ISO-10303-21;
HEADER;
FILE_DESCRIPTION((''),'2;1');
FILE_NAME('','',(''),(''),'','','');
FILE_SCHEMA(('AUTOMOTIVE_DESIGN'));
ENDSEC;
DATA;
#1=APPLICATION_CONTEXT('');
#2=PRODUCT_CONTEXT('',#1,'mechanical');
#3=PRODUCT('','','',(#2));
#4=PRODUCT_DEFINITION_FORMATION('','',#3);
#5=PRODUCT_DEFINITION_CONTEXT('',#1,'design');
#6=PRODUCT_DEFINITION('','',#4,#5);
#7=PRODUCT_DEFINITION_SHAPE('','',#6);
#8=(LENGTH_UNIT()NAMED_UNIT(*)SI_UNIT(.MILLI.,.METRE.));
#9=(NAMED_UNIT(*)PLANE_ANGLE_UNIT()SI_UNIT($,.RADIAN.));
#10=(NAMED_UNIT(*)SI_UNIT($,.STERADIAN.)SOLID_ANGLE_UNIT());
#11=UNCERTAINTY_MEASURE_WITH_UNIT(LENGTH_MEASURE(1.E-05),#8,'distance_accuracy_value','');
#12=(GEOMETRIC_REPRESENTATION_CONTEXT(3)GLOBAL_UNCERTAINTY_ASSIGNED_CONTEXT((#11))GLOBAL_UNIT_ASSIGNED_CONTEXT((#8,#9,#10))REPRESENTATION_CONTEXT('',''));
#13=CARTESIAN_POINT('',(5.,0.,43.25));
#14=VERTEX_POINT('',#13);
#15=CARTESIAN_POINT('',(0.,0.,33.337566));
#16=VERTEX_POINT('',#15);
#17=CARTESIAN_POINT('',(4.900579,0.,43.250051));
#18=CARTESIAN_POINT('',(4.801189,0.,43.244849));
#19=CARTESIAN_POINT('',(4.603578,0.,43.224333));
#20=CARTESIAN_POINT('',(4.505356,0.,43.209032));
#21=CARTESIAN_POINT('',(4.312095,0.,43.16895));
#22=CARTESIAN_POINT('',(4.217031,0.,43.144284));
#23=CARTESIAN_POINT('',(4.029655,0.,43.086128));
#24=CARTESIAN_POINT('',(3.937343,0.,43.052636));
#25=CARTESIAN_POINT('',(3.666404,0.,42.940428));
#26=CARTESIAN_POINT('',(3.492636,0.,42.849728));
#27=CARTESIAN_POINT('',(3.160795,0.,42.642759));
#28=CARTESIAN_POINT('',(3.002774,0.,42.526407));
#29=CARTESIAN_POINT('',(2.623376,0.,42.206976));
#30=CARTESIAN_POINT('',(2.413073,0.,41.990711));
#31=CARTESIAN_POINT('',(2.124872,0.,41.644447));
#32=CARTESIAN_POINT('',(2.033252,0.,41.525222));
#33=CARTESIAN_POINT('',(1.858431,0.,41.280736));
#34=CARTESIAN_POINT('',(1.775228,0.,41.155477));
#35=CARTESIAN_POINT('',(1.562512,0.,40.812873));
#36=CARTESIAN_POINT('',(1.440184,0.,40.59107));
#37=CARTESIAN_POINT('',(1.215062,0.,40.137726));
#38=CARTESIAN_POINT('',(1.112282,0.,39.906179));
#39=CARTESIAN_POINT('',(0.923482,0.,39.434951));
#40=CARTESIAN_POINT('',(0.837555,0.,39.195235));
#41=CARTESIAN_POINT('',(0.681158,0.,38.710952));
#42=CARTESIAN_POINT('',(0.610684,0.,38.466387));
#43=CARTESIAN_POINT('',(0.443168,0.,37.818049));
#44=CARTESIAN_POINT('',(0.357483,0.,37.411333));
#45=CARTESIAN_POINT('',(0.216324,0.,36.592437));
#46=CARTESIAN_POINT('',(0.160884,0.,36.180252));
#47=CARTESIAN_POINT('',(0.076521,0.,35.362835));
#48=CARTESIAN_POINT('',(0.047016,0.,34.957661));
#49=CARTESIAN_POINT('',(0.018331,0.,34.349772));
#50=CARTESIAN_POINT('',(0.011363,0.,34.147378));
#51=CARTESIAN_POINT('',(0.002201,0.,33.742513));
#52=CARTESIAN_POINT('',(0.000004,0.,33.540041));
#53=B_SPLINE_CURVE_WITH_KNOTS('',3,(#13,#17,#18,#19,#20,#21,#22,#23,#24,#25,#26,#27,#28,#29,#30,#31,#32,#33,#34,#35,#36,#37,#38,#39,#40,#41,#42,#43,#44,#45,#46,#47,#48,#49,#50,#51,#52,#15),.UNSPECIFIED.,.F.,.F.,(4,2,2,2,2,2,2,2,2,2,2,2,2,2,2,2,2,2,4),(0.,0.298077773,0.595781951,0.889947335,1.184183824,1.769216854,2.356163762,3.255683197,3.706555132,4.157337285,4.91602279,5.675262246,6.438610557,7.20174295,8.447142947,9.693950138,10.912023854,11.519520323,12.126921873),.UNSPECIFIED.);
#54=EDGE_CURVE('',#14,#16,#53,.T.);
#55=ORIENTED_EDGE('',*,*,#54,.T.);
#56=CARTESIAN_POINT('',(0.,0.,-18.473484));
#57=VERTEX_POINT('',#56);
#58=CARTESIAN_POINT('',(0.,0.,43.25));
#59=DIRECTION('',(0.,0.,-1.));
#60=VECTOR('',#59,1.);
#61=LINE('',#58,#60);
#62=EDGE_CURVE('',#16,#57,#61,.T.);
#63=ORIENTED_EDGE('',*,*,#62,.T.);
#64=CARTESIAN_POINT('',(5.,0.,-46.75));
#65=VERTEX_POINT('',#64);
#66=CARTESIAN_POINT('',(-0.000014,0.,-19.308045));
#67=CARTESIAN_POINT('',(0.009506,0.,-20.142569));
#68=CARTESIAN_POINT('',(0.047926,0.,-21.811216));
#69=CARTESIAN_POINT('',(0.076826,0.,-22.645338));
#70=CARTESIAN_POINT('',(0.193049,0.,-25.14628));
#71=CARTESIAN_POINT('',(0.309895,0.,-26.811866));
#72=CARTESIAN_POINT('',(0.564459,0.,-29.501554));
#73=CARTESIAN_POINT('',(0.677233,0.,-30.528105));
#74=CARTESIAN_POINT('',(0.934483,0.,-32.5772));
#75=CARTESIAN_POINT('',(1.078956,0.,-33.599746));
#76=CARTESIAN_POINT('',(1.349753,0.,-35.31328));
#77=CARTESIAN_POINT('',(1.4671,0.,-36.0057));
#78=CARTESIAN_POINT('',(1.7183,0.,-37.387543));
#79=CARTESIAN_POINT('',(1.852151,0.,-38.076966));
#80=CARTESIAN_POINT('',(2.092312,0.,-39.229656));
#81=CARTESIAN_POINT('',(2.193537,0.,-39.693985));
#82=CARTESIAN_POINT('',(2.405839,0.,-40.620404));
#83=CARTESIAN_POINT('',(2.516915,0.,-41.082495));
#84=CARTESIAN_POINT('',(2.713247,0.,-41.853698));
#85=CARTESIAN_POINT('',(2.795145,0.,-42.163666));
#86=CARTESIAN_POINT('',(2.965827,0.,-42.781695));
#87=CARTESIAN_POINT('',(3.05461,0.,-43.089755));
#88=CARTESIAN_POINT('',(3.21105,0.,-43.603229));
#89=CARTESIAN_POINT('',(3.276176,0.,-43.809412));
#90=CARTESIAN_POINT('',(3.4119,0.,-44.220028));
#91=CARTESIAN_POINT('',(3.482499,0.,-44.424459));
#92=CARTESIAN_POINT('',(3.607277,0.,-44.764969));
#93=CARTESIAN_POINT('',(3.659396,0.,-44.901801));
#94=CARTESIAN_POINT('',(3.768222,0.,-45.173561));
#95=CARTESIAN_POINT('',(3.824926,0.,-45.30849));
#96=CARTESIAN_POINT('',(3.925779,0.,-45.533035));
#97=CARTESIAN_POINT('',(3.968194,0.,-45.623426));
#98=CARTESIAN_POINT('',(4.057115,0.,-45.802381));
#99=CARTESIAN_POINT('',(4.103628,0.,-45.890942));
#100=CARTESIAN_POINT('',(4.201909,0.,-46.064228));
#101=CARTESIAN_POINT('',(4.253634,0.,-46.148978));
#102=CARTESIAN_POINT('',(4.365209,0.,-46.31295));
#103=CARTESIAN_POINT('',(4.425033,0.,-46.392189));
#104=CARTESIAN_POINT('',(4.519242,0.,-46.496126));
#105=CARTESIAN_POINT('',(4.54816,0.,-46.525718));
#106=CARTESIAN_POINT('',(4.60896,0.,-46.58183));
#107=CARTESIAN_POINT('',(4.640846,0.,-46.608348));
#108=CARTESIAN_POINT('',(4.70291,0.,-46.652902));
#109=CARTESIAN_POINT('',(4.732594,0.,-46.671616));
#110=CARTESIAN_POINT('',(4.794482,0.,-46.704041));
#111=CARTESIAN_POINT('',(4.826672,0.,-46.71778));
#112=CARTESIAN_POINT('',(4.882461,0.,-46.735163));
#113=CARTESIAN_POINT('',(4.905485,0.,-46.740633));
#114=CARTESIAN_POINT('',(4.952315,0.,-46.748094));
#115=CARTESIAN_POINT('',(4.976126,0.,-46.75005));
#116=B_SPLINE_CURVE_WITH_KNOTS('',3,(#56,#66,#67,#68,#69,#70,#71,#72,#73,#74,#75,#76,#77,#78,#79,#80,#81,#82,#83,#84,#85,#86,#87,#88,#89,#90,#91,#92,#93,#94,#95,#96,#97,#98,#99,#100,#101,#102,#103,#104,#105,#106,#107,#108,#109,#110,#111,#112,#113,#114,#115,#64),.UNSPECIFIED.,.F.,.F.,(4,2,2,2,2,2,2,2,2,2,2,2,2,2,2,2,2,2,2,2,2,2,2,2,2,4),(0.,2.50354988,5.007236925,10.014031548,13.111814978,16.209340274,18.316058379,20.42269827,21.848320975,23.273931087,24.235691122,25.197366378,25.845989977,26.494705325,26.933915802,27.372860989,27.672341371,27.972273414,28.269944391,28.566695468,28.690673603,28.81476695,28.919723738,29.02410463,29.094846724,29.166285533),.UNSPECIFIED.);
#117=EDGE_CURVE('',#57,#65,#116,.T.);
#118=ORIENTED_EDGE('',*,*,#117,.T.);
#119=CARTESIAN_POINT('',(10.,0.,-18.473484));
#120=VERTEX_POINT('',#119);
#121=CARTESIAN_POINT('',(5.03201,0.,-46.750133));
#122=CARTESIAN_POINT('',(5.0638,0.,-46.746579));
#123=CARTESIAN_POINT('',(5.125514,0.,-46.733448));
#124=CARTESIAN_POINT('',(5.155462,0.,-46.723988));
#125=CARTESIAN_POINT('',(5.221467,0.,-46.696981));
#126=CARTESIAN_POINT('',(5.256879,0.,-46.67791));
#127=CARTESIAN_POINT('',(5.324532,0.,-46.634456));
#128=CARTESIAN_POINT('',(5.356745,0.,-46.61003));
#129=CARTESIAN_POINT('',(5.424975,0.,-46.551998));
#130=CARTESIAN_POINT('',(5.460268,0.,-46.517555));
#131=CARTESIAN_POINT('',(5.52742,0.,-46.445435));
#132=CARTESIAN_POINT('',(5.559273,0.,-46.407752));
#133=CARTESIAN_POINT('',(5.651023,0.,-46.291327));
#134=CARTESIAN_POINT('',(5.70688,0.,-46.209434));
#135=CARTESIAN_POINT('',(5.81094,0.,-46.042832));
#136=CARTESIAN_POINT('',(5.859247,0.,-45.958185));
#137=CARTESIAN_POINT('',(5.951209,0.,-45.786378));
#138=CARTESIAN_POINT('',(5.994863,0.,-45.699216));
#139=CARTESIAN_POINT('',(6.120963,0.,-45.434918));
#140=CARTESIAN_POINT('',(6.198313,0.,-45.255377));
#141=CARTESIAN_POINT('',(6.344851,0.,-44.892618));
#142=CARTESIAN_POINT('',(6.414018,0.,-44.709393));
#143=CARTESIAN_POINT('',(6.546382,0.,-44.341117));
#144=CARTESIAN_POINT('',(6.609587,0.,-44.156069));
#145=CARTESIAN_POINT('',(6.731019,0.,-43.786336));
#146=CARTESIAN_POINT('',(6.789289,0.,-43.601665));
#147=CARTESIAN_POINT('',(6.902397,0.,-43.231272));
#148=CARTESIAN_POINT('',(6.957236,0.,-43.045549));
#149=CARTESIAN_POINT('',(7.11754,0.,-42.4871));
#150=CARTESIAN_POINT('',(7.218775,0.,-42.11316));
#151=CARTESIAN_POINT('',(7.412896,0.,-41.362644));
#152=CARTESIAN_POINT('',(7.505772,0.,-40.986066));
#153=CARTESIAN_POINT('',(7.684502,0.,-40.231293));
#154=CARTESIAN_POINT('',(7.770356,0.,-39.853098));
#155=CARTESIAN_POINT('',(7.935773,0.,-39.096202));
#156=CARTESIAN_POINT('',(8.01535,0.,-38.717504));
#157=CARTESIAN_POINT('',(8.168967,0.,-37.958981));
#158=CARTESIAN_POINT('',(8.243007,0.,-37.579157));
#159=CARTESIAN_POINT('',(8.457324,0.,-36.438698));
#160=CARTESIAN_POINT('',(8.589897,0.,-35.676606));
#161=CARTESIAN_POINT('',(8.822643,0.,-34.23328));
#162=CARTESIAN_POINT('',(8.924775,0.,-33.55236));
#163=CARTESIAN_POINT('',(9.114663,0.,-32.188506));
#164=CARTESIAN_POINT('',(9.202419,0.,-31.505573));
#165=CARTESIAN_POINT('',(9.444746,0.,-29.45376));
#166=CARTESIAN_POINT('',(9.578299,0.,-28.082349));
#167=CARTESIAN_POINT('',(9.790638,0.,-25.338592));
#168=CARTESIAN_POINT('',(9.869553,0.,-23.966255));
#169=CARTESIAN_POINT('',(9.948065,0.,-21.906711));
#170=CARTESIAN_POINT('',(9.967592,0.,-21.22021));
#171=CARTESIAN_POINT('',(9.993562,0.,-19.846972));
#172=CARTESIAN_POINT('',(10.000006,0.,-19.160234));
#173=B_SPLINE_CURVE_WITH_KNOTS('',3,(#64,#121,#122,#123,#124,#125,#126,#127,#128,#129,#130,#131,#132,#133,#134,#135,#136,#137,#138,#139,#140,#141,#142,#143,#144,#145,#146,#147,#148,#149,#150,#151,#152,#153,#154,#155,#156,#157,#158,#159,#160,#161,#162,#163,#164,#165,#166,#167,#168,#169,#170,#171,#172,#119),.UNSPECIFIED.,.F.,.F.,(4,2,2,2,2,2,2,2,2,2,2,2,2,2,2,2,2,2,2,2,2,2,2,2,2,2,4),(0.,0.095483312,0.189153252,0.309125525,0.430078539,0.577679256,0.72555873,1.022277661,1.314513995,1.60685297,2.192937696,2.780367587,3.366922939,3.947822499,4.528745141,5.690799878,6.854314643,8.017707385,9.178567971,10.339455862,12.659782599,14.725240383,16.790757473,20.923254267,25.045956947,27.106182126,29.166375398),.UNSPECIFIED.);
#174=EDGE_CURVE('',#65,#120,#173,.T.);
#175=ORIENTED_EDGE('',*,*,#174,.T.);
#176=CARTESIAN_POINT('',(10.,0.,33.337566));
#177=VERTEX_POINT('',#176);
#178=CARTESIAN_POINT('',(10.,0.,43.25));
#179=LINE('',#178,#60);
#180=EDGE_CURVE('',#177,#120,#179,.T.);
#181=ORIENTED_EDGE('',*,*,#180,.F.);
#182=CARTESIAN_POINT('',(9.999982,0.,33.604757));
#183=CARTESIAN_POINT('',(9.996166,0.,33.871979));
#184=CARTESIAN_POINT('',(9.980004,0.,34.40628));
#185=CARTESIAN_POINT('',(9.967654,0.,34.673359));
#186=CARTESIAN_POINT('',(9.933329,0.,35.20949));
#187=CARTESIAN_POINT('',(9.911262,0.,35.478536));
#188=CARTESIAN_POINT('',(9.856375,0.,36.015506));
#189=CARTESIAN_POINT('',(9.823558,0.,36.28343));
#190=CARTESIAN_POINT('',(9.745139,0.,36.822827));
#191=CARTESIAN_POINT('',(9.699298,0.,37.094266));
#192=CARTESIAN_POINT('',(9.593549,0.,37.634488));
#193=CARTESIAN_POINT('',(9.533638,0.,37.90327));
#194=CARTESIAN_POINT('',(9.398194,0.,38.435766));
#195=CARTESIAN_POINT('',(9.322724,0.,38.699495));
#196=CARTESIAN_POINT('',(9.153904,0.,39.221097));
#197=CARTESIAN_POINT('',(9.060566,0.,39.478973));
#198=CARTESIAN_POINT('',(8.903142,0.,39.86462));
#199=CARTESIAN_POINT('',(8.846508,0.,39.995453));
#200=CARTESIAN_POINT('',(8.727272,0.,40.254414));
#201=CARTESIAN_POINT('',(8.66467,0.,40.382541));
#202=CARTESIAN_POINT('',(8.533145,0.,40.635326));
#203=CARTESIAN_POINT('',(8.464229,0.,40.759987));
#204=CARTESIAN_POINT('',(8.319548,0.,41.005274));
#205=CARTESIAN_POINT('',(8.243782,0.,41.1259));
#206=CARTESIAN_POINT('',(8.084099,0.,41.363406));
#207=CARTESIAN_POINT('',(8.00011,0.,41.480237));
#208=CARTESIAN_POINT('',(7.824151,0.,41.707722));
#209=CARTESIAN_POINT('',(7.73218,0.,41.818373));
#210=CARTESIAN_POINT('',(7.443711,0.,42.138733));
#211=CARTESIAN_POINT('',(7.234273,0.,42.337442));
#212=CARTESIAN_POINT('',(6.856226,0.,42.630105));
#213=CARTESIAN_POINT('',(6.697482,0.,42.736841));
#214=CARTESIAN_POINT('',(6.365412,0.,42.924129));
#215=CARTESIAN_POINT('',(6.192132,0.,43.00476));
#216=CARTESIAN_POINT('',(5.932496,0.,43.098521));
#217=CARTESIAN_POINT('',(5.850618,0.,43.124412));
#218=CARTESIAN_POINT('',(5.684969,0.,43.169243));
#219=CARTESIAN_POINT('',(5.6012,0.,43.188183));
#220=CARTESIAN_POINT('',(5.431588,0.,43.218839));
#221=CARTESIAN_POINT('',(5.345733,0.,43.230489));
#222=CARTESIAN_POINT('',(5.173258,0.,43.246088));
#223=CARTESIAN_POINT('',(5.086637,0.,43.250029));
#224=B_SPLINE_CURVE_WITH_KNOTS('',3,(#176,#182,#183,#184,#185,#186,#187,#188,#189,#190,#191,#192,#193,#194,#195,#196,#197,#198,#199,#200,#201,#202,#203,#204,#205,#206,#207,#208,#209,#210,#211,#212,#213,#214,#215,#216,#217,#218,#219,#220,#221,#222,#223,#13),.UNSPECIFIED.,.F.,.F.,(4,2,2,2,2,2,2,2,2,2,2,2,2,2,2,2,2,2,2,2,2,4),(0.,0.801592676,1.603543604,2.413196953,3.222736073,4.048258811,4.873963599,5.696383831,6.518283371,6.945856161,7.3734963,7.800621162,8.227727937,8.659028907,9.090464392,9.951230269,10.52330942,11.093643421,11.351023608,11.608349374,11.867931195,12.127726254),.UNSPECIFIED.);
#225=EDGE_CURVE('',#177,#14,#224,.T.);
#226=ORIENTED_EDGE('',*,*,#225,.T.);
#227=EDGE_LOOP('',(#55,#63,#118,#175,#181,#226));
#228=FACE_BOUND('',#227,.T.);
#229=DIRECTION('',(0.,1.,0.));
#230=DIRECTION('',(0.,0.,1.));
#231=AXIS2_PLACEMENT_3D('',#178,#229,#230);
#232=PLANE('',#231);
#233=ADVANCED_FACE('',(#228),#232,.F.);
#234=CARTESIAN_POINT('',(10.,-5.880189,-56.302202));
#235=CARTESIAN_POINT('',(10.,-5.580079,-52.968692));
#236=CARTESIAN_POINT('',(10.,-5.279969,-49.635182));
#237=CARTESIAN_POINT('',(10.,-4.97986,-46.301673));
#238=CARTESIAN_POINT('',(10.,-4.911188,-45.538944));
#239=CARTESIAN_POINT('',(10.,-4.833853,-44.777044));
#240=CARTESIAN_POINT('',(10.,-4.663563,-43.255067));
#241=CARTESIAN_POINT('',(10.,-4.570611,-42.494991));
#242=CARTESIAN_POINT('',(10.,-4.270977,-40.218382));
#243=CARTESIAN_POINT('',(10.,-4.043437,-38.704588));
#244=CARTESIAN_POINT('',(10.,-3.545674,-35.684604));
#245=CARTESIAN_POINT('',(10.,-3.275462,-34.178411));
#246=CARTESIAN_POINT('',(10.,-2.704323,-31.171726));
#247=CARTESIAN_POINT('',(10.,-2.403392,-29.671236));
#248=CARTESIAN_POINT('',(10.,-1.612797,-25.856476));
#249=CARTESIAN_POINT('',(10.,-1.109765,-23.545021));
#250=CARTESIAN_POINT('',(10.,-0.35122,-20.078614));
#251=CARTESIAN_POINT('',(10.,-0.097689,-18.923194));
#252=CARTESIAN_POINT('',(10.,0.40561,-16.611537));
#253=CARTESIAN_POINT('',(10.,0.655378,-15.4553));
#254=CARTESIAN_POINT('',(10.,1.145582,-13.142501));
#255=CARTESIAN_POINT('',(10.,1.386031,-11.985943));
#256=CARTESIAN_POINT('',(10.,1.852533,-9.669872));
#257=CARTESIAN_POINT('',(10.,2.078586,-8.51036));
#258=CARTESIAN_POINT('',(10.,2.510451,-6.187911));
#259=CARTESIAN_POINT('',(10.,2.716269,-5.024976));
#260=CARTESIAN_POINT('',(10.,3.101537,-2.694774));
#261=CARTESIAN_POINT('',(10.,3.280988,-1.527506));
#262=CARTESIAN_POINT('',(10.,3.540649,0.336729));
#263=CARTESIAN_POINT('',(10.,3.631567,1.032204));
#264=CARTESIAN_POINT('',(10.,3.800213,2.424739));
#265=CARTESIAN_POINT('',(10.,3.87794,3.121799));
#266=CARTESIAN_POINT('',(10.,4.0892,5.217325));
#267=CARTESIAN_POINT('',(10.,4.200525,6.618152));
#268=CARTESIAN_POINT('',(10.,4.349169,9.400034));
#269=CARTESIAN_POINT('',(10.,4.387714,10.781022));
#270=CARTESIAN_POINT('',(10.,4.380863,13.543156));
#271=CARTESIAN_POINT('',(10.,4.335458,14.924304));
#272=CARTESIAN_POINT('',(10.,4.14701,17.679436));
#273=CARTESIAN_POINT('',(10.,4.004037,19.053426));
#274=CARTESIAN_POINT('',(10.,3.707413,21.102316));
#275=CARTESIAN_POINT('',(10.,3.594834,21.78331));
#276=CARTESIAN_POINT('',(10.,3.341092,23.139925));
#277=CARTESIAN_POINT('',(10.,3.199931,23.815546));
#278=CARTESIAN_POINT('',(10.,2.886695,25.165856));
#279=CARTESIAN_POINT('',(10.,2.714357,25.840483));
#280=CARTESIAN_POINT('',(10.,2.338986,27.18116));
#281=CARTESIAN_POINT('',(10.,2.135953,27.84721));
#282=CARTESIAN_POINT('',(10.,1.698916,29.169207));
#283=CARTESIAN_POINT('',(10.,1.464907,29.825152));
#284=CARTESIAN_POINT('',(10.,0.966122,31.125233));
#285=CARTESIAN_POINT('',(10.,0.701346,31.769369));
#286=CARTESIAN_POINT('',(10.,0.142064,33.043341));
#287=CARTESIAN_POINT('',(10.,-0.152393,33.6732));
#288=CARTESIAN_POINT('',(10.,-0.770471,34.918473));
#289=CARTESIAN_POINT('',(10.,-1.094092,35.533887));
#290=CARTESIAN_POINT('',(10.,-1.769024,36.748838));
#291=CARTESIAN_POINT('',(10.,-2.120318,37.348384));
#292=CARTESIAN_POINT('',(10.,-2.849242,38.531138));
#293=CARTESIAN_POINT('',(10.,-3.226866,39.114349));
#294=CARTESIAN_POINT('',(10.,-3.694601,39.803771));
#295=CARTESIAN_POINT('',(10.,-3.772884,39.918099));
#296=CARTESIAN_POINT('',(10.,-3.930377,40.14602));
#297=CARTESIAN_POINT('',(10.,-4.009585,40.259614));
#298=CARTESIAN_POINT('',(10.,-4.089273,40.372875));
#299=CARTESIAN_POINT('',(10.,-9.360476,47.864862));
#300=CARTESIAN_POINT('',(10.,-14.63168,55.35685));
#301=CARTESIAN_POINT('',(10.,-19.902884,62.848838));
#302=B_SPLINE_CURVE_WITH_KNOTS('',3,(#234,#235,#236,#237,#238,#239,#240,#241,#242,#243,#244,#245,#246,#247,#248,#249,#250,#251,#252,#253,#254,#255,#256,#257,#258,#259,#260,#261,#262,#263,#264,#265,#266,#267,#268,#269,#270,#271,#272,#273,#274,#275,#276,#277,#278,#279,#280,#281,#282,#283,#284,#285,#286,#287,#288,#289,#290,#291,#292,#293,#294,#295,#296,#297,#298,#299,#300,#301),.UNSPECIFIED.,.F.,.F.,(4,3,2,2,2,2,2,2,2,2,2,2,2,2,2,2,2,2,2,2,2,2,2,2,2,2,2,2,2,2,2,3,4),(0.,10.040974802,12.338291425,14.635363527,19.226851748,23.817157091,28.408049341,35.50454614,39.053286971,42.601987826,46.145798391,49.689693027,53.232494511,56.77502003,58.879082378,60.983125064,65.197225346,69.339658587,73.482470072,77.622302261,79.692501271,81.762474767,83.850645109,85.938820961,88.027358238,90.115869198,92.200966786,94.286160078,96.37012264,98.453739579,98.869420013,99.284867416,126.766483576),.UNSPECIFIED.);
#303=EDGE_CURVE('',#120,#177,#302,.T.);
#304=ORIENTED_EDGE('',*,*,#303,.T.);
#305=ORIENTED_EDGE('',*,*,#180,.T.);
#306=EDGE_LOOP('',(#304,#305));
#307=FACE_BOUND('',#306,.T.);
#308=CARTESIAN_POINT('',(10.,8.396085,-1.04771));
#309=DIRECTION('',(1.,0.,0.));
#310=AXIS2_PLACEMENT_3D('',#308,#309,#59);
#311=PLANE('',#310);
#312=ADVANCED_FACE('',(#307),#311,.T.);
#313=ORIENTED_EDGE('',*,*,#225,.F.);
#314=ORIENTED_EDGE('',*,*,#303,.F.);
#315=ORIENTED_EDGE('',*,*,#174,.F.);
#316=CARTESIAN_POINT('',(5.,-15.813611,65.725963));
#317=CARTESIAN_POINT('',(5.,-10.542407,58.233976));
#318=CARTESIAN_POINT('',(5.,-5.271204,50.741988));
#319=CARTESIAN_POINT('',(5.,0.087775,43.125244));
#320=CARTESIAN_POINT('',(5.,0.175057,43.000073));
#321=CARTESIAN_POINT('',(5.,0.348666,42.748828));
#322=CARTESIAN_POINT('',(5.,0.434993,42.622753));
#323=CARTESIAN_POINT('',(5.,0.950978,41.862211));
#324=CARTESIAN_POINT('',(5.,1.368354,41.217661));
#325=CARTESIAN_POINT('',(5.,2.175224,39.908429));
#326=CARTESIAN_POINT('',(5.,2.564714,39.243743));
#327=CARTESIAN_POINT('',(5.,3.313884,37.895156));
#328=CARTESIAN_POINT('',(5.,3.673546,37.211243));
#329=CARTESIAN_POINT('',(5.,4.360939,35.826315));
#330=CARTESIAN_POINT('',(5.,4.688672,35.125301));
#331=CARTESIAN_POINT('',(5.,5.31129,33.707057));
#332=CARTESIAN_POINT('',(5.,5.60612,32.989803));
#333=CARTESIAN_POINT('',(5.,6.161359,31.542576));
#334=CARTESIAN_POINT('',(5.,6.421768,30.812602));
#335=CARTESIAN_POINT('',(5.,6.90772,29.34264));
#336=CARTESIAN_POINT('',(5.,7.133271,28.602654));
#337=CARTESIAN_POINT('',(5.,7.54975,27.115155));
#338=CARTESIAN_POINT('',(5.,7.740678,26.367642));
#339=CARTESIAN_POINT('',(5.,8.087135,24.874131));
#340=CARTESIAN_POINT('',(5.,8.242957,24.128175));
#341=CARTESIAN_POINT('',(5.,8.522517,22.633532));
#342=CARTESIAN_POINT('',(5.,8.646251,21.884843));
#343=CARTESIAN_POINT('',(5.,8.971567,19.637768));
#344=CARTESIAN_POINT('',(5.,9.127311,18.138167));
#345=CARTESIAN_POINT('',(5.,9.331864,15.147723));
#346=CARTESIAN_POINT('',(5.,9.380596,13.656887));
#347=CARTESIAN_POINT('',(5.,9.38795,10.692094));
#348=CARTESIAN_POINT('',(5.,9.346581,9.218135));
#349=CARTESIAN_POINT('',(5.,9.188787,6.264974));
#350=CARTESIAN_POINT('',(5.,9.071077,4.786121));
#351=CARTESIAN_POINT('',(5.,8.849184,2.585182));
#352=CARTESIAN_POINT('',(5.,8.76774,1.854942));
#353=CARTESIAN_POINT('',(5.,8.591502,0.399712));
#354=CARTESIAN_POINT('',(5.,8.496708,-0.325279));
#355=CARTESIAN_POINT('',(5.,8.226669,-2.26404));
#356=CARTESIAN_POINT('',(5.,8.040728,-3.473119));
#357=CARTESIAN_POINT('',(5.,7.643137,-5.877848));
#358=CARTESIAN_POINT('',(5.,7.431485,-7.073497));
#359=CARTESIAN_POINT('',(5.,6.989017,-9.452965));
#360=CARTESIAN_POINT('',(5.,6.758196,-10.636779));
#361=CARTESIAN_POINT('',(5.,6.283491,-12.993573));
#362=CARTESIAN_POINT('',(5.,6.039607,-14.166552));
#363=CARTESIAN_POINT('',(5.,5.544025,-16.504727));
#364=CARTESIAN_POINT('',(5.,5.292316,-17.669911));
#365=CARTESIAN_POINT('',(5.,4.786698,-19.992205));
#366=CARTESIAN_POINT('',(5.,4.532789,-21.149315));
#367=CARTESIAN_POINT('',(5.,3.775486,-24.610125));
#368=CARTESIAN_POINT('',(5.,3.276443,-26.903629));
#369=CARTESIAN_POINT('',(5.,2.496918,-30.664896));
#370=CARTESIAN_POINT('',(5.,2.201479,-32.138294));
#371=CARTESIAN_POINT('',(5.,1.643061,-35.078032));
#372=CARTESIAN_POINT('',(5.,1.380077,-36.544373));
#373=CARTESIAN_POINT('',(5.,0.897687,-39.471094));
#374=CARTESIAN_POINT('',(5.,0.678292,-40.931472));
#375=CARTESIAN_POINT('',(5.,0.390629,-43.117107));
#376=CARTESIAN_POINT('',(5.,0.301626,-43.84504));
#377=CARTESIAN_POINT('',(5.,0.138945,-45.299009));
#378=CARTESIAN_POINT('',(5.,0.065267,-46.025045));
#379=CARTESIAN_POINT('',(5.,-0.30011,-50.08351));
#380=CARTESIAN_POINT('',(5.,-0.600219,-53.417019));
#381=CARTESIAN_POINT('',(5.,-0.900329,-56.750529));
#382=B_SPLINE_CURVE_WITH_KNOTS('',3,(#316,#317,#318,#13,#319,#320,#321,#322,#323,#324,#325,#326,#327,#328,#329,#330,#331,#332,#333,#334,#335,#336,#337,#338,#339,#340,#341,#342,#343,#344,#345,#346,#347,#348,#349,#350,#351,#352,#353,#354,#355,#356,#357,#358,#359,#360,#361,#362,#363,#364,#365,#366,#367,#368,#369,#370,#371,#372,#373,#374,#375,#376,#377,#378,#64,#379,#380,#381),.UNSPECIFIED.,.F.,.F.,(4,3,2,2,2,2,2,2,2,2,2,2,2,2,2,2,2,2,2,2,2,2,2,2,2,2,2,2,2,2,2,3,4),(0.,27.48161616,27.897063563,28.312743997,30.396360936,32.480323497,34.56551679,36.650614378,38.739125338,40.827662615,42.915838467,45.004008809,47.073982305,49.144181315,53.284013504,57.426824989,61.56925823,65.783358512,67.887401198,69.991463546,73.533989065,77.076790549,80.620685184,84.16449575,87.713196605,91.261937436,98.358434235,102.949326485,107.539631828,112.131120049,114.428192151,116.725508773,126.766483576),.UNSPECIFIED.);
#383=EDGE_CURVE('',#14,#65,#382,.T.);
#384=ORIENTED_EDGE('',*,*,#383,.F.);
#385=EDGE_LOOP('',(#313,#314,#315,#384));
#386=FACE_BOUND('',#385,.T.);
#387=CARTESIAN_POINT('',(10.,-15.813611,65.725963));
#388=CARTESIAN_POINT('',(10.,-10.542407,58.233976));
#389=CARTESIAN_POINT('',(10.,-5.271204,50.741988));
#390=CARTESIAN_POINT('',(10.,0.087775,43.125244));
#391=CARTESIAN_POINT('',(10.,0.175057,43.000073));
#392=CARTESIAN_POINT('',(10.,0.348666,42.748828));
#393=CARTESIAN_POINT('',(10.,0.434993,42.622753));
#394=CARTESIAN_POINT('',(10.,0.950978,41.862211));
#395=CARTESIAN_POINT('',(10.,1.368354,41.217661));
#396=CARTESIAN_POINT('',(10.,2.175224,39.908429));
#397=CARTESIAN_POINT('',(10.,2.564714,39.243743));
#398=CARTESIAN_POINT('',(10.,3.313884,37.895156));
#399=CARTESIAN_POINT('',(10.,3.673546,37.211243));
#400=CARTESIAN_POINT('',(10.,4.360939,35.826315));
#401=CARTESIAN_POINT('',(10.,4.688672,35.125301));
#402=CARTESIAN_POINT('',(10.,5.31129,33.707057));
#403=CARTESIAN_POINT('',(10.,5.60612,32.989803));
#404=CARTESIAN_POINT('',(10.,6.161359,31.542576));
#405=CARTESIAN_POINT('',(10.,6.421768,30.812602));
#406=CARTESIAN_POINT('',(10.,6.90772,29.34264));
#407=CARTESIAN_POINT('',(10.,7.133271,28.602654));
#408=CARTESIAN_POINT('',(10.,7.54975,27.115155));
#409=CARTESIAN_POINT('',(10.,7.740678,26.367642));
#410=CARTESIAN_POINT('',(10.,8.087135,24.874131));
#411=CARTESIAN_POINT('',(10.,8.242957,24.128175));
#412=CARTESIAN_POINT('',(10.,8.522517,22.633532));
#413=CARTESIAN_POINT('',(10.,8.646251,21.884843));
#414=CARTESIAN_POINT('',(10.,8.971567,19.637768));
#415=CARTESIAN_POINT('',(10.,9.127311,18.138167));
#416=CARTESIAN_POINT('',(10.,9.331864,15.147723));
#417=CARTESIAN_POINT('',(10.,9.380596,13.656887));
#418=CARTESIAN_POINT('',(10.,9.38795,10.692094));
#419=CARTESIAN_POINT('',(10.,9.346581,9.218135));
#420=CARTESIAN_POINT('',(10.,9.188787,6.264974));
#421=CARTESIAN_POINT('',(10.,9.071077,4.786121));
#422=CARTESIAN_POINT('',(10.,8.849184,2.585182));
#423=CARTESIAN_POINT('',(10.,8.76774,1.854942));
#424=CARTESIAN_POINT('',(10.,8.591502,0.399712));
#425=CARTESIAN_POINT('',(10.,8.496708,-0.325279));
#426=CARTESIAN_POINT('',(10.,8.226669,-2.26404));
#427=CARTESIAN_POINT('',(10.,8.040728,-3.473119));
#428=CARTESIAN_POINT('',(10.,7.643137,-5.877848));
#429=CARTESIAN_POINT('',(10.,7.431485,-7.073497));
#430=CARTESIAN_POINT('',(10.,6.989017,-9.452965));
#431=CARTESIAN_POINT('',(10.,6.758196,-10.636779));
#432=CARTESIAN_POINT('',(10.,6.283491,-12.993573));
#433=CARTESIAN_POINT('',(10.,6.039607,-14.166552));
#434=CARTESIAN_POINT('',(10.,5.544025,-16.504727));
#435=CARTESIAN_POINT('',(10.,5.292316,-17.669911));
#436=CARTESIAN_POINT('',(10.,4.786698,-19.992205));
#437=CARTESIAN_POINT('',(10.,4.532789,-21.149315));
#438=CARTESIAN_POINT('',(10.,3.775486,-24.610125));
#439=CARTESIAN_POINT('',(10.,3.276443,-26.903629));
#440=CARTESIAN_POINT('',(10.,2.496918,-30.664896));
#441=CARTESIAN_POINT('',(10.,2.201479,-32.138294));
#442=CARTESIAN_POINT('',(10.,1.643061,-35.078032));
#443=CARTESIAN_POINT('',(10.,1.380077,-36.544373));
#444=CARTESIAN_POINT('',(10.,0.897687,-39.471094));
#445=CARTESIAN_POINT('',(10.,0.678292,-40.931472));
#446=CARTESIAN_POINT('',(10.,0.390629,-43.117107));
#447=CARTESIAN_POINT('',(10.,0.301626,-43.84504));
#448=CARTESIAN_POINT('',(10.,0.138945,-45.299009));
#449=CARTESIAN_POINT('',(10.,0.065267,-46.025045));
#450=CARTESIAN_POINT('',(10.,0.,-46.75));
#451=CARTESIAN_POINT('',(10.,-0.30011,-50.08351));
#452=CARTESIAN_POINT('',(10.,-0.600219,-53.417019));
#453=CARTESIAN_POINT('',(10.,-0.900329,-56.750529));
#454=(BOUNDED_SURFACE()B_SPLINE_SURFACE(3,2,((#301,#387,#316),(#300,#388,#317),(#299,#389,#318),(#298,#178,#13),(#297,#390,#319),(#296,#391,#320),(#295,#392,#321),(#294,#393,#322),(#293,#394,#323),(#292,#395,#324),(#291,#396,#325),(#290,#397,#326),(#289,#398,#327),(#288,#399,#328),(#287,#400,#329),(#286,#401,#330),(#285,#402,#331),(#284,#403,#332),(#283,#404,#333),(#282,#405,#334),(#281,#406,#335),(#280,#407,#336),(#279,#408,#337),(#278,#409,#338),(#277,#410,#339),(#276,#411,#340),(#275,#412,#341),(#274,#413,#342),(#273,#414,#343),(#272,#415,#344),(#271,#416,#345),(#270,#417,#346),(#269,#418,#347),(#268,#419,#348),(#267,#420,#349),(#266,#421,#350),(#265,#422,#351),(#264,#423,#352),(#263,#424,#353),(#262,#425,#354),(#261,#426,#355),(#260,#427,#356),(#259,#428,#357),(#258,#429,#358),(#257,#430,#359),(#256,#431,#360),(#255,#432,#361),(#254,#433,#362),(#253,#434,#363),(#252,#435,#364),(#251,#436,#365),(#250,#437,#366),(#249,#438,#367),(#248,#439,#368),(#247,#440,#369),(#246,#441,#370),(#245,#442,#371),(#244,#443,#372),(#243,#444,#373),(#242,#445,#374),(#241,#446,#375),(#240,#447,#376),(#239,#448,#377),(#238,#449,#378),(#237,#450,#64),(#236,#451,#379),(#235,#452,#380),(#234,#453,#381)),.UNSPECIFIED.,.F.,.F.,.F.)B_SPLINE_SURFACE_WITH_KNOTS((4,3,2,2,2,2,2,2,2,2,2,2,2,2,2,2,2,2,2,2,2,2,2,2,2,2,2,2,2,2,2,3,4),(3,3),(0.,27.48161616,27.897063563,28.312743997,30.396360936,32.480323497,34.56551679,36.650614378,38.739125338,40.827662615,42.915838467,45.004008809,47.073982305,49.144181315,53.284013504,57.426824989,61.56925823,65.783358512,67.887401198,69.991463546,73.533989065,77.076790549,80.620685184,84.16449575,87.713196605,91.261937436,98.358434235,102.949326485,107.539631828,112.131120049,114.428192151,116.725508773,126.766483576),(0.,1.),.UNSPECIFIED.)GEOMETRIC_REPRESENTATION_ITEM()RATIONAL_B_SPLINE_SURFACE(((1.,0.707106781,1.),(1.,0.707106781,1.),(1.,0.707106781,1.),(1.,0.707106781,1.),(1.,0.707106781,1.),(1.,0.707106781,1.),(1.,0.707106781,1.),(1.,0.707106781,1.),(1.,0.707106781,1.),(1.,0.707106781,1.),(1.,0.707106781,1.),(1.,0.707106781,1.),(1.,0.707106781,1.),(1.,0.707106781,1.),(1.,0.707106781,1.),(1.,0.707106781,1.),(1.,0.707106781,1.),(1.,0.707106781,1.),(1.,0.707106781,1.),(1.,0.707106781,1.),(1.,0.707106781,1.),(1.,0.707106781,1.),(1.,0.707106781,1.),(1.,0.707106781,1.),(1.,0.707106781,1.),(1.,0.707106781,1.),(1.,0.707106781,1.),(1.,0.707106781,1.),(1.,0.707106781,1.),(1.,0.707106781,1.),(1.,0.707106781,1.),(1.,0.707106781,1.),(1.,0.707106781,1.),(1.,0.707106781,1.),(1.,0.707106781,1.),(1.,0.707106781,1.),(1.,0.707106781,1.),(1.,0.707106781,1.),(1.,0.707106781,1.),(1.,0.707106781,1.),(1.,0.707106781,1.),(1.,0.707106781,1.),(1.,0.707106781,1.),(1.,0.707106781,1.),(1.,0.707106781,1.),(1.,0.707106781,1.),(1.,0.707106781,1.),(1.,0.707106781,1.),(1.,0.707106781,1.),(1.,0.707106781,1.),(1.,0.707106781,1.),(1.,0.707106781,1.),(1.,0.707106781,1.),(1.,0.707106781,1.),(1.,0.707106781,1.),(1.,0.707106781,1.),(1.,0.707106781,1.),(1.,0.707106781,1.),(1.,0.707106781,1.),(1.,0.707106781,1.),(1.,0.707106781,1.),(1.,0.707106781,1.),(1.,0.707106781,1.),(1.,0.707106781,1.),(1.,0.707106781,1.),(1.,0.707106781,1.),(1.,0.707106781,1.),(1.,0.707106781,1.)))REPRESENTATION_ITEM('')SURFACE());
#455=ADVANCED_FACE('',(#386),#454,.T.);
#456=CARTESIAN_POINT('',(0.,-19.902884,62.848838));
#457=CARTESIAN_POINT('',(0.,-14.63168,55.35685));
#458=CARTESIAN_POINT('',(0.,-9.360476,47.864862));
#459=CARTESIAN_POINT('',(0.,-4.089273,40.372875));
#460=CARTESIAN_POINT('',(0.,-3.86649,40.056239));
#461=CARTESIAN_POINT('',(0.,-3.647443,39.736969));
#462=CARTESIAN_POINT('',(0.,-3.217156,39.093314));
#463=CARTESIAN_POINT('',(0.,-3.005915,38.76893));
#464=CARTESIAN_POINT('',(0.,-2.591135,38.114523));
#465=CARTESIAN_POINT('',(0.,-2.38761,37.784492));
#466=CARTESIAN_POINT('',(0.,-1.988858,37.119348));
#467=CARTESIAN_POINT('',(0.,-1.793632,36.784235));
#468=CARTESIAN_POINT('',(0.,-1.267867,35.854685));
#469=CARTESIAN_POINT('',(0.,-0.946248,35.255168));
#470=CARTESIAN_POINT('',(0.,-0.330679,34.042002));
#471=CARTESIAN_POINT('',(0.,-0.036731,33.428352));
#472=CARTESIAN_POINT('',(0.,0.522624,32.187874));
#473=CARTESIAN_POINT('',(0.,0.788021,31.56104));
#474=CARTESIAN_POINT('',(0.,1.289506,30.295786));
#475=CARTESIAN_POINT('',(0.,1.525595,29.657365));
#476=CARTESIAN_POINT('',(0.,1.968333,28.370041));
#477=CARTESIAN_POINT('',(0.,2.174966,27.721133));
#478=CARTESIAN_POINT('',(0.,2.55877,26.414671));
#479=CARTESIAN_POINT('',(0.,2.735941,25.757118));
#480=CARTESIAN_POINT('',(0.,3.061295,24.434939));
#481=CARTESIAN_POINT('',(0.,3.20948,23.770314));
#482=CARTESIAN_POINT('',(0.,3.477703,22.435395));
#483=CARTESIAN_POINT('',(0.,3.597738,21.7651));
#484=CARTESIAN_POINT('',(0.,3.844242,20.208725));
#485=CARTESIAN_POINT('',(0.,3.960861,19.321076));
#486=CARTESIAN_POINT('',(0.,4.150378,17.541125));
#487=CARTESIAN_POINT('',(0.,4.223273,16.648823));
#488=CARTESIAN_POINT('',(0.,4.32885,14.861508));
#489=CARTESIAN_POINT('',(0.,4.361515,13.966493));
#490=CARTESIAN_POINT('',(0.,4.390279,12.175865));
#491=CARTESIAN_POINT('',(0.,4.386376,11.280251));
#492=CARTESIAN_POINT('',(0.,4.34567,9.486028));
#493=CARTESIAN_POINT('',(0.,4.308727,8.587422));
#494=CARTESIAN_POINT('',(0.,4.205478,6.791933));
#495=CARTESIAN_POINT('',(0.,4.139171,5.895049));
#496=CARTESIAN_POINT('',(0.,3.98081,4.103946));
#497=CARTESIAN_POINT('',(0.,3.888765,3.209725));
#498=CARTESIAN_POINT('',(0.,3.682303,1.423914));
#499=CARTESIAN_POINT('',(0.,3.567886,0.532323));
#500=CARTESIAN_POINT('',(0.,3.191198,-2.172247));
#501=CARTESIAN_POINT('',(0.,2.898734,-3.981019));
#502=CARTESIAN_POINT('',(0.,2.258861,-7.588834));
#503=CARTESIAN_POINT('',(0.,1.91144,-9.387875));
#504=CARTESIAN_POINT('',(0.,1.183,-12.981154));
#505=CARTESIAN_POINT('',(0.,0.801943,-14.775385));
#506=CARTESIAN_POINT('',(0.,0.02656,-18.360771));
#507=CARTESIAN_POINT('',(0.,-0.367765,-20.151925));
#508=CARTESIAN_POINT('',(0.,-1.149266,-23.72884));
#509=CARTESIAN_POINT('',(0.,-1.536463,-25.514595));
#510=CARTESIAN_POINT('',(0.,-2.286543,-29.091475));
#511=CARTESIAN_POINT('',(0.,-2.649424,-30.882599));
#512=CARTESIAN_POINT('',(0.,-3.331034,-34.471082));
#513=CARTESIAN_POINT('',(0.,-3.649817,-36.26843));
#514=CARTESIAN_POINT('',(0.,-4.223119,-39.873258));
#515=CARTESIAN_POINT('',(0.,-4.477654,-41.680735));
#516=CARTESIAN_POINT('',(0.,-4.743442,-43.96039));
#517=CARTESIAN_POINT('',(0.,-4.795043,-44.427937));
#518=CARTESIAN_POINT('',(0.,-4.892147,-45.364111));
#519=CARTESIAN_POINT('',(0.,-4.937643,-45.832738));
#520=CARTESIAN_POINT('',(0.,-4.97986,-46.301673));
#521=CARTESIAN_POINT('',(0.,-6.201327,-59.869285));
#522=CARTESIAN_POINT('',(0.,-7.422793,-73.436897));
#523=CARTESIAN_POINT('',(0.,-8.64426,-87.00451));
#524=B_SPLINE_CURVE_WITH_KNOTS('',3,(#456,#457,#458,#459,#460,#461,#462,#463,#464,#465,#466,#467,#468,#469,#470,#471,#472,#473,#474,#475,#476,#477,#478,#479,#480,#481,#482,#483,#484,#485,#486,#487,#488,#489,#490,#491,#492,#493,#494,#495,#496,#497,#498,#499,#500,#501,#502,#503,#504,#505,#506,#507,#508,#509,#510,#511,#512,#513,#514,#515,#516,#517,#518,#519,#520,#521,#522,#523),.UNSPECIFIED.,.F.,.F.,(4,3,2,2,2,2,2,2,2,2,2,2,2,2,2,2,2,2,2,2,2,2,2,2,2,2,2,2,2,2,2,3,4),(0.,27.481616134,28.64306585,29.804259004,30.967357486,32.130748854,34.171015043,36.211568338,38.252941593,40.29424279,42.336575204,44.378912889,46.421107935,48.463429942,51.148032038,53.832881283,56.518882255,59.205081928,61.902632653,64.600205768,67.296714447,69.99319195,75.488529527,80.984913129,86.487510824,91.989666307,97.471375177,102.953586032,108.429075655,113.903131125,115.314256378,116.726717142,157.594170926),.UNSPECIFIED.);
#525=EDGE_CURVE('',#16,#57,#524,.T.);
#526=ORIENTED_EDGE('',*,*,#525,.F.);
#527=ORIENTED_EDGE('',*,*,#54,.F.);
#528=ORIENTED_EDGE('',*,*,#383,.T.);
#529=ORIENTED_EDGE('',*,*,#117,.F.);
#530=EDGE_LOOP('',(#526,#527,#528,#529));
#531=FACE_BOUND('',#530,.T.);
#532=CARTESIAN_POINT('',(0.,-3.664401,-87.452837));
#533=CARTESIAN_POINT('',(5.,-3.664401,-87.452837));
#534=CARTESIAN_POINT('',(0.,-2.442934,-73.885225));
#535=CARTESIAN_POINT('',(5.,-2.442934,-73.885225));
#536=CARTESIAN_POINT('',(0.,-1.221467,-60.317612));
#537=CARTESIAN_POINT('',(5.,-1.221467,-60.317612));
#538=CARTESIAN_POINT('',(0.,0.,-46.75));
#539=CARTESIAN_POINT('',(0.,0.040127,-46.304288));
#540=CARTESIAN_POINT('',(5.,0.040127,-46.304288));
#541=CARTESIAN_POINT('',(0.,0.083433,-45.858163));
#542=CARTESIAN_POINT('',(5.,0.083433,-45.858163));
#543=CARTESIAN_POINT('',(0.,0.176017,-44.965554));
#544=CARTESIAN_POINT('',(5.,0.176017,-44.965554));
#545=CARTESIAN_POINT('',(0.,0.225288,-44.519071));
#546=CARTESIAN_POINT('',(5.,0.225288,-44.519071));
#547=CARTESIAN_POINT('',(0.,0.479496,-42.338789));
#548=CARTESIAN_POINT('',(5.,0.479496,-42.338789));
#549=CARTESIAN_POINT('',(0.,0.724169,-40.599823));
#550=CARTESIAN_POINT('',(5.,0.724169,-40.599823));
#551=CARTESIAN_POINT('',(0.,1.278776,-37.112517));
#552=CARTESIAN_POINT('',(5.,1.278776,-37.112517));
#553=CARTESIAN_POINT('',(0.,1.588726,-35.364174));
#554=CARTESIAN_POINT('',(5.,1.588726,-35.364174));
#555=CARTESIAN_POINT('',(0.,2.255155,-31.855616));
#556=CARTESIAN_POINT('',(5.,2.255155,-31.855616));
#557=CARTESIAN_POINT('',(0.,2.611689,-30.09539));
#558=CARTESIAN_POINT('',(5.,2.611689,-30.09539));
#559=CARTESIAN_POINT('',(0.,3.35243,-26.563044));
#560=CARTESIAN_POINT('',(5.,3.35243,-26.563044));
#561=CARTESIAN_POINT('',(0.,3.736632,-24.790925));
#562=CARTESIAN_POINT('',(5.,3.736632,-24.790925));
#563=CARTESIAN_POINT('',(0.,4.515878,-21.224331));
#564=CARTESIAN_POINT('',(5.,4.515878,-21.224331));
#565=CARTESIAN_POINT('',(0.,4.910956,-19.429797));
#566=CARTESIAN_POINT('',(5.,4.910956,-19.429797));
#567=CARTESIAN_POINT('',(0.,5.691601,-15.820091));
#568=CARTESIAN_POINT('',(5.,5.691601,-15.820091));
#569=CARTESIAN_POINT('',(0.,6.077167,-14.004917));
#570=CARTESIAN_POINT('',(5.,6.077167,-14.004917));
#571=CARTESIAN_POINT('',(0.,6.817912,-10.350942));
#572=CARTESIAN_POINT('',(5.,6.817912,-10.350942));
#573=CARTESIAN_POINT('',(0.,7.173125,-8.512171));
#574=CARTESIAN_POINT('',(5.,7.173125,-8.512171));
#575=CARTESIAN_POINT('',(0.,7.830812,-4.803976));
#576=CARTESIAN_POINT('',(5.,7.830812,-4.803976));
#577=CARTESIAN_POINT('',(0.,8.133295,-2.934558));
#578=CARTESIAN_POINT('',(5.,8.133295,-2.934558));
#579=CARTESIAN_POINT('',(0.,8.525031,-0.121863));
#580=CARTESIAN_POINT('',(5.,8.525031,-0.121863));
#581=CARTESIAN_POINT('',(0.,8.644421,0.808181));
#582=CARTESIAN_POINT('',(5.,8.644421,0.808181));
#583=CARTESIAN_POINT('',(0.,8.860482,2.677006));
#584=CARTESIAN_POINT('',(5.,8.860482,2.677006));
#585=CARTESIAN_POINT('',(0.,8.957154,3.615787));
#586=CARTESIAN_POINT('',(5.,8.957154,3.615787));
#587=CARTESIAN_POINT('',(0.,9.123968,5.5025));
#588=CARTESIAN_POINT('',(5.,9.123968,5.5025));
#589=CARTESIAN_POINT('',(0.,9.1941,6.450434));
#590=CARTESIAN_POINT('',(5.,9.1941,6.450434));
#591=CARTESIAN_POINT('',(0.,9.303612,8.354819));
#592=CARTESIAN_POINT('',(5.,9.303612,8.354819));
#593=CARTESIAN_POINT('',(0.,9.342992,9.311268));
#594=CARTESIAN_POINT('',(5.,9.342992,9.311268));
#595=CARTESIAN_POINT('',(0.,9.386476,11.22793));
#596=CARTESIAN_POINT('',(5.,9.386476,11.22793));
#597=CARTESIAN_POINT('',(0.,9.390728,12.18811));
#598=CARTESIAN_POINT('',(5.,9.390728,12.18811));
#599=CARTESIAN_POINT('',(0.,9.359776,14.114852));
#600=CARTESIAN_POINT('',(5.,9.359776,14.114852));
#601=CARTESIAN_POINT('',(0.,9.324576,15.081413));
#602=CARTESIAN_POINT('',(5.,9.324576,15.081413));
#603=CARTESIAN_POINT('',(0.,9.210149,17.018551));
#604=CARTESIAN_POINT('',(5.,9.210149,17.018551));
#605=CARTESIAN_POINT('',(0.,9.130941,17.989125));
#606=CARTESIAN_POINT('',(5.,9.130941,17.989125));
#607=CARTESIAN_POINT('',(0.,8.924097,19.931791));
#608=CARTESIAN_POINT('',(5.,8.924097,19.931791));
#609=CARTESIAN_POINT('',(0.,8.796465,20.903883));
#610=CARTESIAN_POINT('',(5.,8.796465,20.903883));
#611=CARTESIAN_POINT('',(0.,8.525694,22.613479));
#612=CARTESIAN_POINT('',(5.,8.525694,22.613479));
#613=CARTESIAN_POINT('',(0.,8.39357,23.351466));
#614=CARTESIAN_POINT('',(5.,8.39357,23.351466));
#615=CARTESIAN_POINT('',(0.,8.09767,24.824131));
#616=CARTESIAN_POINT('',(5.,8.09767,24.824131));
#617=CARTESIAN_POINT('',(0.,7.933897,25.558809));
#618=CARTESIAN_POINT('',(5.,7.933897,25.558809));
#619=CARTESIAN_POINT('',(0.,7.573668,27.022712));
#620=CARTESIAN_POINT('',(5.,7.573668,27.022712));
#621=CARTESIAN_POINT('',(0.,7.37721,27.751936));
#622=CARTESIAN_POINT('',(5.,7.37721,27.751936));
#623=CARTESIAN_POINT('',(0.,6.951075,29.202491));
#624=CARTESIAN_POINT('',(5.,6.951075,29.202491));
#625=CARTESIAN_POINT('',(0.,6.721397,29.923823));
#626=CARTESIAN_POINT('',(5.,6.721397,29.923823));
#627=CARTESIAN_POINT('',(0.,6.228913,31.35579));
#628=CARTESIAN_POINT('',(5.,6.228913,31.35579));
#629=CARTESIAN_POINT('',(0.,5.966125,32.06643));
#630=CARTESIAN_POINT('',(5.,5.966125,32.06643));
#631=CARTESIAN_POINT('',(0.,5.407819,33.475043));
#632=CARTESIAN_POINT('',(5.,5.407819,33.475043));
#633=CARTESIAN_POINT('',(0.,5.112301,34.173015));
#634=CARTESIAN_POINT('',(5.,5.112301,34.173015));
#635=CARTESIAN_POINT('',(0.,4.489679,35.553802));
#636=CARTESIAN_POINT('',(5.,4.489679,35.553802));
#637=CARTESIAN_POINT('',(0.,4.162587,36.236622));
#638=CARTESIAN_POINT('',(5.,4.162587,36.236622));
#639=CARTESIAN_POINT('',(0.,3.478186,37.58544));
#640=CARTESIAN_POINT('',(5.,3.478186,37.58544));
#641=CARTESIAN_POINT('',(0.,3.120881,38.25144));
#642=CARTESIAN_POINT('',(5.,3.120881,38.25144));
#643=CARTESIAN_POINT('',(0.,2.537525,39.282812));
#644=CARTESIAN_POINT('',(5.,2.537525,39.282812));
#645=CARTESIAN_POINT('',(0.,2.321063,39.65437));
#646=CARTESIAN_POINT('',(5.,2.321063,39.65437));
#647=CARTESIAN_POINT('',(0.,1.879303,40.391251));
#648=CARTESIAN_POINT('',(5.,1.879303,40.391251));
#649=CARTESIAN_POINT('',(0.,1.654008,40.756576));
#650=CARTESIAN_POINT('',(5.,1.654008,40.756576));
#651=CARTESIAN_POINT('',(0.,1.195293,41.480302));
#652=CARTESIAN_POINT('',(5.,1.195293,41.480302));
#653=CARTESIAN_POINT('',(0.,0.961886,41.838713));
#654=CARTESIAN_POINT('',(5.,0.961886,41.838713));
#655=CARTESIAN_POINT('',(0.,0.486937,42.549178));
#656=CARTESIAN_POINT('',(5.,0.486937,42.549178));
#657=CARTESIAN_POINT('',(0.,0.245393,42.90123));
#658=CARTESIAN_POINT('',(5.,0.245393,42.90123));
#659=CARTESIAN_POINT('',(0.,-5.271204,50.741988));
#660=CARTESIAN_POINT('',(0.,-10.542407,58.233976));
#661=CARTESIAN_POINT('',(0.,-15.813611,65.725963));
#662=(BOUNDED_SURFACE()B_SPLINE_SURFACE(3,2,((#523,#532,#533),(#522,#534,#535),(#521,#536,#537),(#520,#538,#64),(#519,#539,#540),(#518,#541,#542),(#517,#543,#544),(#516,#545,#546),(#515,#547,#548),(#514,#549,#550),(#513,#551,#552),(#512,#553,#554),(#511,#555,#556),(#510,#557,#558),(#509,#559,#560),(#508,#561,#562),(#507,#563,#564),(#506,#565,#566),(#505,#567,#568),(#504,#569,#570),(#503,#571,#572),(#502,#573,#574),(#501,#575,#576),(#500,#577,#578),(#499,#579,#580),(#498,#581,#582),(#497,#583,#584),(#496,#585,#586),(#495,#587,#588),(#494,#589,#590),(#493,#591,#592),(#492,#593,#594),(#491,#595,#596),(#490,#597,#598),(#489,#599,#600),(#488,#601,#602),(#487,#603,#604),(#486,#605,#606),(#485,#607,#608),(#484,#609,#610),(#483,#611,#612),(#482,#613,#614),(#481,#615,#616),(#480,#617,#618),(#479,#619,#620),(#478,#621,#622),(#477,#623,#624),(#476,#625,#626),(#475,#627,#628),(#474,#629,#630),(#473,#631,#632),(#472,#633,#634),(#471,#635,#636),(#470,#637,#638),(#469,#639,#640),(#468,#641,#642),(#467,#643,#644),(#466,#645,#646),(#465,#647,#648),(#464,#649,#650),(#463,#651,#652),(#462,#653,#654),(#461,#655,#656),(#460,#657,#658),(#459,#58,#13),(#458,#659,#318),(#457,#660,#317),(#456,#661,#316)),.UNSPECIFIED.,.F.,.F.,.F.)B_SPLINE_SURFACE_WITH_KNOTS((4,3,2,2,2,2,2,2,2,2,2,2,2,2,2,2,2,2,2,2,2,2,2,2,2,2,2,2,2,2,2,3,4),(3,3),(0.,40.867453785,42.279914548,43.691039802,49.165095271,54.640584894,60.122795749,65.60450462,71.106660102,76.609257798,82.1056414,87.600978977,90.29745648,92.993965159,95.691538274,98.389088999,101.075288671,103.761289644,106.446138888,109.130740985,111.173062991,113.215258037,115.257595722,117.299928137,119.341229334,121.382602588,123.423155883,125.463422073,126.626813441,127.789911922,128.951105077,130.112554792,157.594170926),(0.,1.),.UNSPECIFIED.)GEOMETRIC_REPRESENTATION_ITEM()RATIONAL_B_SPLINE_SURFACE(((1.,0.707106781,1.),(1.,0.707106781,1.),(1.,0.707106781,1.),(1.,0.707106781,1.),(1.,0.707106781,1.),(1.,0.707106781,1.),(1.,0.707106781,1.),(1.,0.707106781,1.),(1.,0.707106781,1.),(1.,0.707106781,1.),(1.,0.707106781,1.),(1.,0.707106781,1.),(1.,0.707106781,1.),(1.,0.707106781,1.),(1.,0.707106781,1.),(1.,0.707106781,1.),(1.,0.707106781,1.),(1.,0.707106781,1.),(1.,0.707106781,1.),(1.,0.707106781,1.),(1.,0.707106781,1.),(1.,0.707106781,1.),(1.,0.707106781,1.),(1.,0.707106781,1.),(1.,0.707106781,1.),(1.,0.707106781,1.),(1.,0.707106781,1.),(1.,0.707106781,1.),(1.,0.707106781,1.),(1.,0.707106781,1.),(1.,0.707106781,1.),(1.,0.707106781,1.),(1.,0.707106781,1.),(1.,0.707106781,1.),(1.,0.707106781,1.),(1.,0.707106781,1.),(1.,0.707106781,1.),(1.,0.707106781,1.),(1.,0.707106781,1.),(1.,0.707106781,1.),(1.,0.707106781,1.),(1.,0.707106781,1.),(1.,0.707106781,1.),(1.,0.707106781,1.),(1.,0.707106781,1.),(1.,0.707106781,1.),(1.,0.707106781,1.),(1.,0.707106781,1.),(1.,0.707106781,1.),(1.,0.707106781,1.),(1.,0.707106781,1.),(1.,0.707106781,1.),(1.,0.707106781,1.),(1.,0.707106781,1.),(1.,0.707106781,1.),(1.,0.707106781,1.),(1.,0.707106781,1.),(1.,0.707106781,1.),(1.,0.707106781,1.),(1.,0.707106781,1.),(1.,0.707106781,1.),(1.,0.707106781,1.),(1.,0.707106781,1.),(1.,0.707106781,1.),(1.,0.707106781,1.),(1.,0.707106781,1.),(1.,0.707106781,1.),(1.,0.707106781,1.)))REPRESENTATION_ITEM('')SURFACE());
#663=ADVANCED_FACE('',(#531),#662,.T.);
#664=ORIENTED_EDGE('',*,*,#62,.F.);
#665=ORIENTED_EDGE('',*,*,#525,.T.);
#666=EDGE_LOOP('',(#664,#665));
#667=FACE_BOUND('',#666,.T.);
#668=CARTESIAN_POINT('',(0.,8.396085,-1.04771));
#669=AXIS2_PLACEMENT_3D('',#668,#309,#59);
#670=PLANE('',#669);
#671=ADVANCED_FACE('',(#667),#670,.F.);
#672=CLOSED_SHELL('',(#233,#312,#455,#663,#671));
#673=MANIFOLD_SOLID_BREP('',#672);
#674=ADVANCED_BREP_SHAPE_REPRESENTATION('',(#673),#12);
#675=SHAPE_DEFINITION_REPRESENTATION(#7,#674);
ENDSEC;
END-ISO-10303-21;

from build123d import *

# Parameters (mm, degrees)
BOSS_EXTRUDE1_DEPTH = 10
FILLET1_R           = 5


with BuildPart() as part:
    # Sketch1 → Boss-Extrude1 (new body)
    with BuildSketch(Plane(origin=(0, 0, 0), x_dir=(0, 0, -1), z_dir=(1, 0, 0))):
        with BuildLine():
            Line((-43.25, 0), (46.75, 0))
            add(Edge.make_bspline(
                [(-43.25, 0), (-15.250046728, 19.700173134), (16.877274504, 2.689385841), (46.75, 0)],
                knots=[0, 0, 0, 0, 1, 1, 1, 1], degree=3))
        make_face()
    extrude(amount=BOSS_EXTRUDE1_DEPTH)

    # Fillet1
    fillet1_edges = [part.edges().sort_by_distance(p)[0] for p in [
        (0, 8.396084616, -1.047710416),
        (10, 8.396084616, -1.047710416),
    ]]
    fillet(fillet1_edges, radius=FILLET1_R - 0.0001)  # a hair under: the kernel refuses the full size


solid = part.part
